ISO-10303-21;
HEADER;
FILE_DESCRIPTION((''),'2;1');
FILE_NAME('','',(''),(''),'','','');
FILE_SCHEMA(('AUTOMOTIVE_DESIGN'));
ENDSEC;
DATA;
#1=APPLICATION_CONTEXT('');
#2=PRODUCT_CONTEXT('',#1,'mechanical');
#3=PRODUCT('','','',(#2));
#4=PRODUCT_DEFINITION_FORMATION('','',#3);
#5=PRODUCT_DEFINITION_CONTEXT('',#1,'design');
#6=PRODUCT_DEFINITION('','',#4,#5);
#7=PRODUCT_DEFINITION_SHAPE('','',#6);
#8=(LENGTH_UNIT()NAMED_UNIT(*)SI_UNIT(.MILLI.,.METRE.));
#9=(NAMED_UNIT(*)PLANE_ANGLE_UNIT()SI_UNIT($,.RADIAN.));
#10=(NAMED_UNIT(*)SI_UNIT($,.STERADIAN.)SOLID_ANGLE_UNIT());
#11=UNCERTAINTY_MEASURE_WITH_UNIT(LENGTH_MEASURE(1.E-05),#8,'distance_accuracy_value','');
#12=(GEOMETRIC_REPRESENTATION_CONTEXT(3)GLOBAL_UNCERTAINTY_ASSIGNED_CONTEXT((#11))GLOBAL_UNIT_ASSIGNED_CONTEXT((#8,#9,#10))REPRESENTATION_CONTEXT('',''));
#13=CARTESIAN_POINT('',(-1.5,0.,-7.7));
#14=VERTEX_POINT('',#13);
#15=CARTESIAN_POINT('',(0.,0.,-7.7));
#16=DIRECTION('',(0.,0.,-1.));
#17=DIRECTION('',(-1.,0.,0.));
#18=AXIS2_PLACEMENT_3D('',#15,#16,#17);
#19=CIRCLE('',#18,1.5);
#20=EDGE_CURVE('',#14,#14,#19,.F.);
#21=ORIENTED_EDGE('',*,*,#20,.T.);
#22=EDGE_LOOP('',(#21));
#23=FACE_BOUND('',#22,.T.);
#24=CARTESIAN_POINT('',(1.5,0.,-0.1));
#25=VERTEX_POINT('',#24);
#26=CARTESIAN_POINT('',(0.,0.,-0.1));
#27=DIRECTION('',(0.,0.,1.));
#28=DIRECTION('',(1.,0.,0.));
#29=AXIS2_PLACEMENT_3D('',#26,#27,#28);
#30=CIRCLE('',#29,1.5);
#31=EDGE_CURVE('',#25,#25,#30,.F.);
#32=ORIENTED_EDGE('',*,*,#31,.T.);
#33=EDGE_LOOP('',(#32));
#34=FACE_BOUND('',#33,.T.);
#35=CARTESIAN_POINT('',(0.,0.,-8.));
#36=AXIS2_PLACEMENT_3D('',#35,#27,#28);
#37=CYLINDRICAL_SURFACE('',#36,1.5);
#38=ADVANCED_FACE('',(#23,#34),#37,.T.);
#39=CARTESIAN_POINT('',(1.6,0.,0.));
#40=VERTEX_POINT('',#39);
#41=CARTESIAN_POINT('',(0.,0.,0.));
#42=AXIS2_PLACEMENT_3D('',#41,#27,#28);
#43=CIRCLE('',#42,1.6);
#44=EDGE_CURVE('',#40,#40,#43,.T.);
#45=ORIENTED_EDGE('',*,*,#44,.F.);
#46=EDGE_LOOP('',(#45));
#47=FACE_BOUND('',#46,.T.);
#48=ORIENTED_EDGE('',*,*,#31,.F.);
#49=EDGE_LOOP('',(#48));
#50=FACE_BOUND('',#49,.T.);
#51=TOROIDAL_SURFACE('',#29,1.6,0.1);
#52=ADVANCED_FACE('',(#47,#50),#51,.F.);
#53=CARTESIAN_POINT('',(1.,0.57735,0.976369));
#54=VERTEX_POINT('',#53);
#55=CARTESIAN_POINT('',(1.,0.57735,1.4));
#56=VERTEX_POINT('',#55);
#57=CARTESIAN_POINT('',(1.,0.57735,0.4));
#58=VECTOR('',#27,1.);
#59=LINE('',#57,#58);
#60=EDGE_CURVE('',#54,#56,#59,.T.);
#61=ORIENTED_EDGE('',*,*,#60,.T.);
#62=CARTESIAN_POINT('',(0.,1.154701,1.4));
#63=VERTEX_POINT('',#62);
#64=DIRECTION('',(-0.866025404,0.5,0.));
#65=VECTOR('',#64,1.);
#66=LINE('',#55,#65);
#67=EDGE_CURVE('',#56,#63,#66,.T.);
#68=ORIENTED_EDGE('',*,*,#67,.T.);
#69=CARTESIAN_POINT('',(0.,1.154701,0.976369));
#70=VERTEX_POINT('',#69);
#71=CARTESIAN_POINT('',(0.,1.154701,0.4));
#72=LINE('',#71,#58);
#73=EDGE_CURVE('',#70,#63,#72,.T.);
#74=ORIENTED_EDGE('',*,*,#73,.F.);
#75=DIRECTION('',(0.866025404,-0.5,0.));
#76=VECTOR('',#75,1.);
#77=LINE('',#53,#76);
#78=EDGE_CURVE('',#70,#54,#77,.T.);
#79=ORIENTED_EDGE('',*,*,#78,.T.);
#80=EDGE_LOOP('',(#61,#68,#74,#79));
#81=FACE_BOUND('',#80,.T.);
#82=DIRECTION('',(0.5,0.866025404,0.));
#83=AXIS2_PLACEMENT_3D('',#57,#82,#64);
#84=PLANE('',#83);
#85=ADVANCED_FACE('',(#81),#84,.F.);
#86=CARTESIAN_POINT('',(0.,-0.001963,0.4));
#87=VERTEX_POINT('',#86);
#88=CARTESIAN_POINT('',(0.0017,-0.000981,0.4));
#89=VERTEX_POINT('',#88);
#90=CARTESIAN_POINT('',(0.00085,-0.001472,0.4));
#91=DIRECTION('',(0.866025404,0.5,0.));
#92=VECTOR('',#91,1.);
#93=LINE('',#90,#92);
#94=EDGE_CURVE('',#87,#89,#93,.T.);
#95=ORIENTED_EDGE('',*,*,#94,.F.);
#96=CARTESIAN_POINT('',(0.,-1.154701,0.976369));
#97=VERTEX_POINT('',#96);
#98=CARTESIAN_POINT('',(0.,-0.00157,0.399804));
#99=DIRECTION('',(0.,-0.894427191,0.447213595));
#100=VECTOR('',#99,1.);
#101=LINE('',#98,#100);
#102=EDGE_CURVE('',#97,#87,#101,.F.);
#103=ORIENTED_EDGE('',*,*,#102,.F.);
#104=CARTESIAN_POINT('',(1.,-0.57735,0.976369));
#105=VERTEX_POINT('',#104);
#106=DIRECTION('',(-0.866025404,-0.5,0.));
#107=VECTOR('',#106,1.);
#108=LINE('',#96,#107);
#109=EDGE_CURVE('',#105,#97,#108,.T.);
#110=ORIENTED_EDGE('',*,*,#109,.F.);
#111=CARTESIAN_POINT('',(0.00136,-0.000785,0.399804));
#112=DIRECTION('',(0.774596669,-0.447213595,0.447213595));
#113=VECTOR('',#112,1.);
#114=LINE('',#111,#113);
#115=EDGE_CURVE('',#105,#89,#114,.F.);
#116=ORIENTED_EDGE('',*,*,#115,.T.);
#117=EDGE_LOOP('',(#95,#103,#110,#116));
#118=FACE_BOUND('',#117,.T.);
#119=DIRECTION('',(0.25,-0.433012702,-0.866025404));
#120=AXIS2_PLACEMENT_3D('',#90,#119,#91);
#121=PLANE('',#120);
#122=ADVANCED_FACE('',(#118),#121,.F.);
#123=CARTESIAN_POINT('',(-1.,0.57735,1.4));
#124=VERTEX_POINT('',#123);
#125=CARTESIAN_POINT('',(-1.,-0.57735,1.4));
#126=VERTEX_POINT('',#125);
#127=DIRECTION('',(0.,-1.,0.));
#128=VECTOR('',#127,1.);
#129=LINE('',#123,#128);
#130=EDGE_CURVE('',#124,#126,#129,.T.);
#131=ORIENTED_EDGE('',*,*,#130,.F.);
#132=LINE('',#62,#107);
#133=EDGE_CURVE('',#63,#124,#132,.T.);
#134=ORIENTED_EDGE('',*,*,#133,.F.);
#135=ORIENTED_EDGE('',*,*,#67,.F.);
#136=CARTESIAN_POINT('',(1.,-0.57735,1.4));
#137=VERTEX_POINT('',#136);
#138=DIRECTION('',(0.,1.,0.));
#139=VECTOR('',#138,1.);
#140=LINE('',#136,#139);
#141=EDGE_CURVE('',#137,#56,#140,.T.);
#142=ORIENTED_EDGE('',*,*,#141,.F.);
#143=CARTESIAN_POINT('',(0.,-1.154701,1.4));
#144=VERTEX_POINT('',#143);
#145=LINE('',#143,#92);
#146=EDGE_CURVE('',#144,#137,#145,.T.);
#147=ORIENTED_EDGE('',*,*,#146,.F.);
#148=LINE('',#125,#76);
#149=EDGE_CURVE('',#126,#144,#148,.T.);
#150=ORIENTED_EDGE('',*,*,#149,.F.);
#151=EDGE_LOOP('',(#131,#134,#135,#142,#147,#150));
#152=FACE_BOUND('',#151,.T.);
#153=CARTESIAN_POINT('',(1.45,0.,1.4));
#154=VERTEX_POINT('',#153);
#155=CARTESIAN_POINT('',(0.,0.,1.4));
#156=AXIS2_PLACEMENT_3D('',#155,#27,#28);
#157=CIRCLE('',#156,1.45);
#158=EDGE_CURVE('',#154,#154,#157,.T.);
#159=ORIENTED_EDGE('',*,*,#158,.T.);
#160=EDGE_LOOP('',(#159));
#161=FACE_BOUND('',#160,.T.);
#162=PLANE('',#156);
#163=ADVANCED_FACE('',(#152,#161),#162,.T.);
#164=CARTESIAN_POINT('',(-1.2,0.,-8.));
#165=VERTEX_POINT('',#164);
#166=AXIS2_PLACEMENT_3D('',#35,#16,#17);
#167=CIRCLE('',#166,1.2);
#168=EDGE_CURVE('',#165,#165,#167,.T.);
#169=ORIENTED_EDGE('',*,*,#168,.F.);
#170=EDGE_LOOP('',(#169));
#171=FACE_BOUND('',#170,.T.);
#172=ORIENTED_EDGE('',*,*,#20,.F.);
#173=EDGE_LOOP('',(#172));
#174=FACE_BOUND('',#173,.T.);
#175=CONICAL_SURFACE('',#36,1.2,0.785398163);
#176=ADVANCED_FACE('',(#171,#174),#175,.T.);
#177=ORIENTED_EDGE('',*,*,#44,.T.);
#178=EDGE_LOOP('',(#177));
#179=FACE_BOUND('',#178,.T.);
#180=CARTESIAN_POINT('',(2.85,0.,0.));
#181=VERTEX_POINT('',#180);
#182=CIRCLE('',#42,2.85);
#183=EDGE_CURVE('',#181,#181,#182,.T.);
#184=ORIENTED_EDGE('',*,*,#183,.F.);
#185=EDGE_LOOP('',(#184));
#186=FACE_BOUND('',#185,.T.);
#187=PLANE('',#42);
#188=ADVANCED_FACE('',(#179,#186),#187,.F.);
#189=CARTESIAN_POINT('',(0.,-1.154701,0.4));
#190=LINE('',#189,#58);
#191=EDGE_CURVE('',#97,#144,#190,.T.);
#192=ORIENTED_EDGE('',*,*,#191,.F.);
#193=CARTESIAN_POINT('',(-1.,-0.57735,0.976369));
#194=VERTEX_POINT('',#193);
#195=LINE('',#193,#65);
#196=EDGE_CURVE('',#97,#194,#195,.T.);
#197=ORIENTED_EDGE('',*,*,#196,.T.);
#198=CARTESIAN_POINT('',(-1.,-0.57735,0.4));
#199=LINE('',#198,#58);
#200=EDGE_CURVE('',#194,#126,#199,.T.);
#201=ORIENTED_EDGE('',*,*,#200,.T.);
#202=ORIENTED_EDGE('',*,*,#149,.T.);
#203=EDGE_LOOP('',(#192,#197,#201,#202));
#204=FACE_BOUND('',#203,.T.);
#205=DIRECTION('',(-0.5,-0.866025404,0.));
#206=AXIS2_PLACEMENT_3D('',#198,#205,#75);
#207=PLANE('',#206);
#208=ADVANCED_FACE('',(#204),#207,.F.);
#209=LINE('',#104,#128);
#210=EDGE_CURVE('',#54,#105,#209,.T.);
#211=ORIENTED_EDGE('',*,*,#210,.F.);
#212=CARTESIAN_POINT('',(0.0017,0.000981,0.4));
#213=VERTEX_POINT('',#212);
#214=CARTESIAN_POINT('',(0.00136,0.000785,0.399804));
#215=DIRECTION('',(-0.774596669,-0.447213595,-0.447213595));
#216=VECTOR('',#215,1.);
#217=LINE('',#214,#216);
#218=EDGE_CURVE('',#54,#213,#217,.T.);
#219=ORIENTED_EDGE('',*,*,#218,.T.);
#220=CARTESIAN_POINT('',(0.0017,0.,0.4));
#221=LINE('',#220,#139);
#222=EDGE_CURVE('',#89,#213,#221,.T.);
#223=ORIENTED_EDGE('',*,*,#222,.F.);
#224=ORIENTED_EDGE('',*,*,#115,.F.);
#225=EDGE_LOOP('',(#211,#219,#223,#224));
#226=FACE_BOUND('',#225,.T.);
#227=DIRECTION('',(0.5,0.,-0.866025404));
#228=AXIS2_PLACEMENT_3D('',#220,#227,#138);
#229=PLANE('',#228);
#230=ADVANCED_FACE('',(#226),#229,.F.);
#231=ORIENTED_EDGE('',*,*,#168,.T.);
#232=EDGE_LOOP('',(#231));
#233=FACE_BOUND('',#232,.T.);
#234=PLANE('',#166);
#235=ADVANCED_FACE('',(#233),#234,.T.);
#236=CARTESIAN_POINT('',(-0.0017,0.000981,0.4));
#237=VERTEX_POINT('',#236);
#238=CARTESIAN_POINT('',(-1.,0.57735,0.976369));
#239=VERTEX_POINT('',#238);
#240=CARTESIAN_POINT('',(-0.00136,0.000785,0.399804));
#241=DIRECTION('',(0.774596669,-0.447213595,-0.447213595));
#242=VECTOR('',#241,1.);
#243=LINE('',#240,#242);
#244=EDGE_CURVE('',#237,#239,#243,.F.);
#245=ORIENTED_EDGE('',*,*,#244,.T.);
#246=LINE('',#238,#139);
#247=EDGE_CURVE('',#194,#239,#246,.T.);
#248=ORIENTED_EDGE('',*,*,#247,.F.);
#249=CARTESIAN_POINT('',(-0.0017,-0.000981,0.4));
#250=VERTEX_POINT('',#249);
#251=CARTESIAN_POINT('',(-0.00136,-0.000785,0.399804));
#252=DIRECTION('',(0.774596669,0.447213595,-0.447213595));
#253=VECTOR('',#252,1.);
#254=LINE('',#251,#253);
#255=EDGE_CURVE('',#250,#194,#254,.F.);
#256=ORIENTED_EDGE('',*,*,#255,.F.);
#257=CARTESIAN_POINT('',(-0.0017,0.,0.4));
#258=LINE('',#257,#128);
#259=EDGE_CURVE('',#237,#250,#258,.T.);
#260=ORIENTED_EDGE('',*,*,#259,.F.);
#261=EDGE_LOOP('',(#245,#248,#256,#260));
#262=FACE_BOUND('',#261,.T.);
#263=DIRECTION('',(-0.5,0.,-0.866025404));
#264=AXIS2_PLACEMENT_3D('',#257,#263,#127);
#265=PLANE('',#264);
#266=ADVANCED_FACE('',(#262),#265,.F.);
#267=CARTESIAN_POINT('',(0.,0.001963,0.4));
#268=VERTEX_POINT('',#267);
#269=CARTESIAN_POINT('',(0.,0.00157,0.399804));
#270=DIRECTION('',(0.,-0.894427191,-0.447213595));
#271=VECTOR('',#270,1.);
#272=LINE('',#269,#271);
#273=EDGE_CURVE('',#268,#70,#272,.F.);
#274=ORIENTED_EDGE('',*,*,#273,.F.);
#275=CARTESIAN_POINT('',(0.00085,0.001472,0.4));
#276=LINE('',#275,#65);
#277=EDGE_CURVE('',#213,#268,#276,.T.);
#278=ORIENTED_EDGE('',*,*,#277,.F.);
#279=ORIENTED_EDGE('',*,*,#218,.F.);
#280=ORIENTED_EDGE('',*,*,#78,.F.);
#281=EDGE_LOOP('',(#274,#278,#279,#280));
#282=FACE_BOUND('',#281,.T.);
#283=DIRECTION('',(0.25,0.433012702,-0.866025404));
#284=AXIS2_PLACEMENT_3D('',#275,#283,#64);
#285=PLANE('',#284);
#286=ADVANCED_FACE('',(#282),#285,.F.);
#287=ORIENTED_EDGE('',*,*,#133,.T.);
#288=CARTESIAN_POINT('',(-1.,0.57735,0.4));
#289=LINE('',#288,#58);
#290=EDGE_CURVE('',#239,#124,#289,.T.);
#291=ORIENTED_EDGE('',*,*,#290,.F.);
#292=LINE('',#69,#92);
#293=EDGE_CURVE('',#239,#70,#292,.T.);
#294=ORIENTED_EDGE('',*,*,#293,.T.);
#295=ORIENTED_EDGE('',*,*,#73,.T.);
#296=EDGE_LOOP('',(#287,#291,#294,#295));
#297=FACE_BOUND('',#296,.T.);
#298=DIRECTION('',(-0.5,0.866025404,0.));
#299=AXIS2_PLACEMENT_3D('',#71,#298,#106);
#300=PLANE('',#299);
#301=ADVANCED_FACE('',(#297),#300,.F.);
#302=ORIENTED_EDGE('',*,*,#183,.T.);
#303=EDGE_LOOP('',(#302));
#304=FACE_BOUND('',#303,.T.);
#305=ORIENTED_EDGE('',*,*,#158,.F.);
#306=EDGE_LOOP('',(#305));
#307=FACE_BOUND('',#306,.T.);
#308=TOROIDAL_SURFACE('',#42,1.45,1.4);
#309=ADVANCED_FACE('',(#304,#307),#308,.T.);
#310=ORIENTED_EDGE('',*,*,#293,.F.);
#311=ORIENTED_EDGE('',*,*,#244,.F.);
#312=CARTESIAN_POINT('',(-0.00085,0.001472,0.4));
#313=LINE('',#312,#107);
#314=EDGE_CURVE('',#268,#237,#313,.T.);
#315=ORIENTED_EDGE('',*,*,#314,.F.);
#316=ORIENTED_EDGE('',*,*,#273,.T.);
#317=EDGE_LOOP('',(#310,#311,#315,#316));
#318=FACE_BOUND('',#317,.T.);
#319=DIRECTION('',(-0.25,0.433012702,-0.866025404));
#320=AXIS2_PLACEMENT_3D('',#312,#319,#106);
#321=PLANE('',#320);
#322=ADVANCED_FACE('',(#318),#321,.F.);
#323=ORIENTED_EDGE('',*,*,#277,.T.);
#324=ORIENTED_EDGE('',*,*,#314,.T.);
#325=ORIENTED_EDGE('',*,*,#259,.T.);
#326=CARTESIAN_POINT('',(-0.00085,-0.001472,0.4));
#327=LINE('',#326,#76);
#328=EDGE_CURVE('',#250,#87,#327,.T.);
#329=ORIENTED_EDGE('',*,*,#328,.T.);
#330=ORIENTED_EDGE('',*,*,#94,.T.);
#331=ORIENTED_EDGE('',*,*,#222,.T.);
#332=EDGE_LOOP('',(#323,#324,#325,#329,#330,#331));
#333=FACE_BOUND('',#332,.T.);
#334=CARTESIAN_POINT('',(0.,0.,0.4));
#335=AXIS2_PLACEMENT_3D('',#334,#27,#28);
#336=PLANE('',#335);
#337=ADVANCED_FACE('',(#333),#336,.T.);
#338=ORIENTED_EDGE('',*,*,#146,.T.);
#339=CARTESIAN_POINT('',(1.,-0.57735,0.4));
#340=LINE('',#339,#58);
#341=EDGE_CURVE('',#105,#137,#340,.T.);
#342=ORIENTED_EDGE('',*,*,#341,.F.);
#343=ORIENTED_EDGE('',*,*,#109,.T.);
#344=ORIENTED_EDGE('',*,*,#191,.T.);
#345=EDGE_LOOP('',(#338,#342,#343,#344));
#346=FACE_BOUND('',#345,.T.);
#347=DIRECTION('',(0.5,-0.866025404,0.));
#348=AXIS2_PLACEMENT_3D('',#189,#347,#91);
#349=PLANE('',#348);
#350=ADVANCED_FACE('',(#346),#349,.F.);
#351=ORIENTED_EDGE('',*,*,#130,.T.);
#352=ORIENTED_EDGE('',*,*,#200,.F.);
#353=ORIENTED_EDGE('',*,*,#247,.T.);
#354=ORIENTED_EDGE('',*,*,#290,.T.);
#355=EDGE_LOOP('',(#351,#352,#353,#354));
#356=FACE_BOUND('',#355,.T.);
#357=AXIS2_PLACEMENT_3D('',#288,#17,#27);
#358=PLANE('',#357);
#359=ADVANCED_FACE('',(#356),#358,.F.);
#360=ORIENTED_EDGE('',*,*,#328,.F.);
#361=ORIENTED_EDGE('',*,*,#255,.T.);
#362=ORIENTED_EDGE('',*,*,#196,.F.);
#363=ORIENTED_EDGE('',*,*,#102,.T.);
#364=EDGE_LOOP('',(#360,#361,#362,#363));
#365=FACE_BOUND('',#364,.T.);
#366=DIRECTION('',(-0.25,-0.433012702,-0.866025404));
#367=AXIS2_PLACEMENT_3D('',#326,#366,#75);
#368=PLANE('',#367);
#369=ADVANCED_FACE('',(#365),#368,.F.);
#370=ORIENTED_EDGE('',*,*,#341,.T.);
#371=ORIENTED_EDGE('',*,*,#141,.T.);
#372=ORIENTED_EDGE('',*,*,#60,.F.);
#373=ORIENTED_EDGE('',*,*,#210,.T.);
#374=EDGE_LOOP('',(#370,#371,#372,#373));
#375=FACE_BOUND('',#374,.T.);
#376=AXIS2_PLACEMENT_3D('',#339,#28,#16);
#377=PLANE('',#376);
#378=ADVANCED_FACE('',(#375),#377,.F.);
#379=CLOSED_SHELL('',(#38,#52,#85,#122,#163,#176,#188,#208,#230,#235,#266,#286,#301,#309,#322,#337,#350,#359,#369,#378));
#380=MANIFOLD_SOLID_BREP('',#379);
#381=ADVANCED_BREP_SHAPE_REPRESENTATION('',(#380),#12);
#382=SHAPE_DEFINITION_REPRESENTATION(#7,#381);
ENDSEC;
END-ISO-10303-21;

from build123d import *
from OCP.BRepFilletAPI import BRepFilletAPI_MakeChamfer

# Parameters (mm, degrees)
SKETCH_1_R          = 2.85
EXTRUDE_1_DEPTH     = 1.4
FILLET_1_R          = 1.4
SKETCH_3_R          = 1.5
EXTRUDE_3_DEPTH     = 8
CUT_EXTRUDE_1_DEPTH = 1
CHAMFER_2_SIZE      = 0.3
CHAMFER_3_SIZE      = 0.576368876
CHAMFER_3_SIZE2     = 0.998300177
FILLET_2_R          = 0.1


with BuildPart() as part:
    # 草图1 → 凸台-拉伸1 (new body)
    with BuildSketch(Plane.XY):
        Circle(SKETCH_1_R)
    extrude(amount=EXTRUDE_1_DEPTH)

    # 圆角1
    fillet_1_edges = [part.edges().sort_by_distance(p)[0] for p in [
        (-2.85, 0, 1.4),
    ]]
    fillet(fillet_1_edges, radius=FILLET_1_R - 0.0001)  # a hair under: the kernel refuses the full size

    # 草图3 → 凸台-拉伸3 (add)
    with BuildSketch(Plane(origin=(0, 0, 0), x_dir=(-1, 0, 0), z_dir=(0, 0, -1))):
        with Locations(Location((0, 0, 0), (0, 0, 180))):
            Circle(SKETCH_3_R)
    extrude(amount=EXTRUDE_3_DEPTH)

    # 草图4 → 切除-拉伸1 (cut)
    with BuildSketch(Plane.XY.offset(1.4)):
        Polygon((1, 0.577350269), (0, 1.154700538), (-1, 0.577350269), (-1, -0.577350269), (0, -1.154700538), (1, -0.577350269), align=None)
    extrude(amount=-CUT_EXTRUDE_1_DEPTH, mode=Mode.SUBTRACT)

    # 倒角2
    chamfer_2_edges = [part.edges().sort_by_distance(p)[0] for p in [
        (-1.5, 0, -8),
    ]]
    chamfer(chamfer_2_edges, length=CHAMFER_2_SIZE)

    # 倒角3: one chamfer whose edges measure the first distance from different faces: ONE call of the kernel's chamfer builder (chamfer() names one face for all edges)
    chamfer_3_edges_1 = [part.edges().sort_by_distance(p)[0] for p in [
        (1, 0, 0.4),
    ]]
    chamfer_3_side_1 = [part.faces().sort_by_distance(p)[0] for p in [
        (1, 0, 0.9),
    ]]
    chamfer_3_edges_2 = [part.edges().sort_by_distance(p)[0] for p in [
        (0.5, -0.866025404, 0.4),
    ]]
    chamfer_3_side_2 = [part.faces().sort_by_distance(p)[0] for p in [
        (0.5, -0.866025404, 0.9),
    ]]
    chamfer_3_edges_3 = [part.edges().sort_by_distance(p)[0] for p in [
        (-0.5, -0.866025404, 0.4),
    ]]
    chamfer_3_side_3 = [part.faces().sort_by_distance(p)[0] for p in [
        (-0.5, -0.866025404, 0.9),
    ]]
    chamfer_3_edges_4 = [part.edges().sort_by_distance(p)[0] for p in [
        (-1, 0, 0.4),
    ]]
    chamfer_3_side_4 = [part.faces().sort_by_distance(p)[0] for p in [
        (-1, 0, 0.9),
    ]]
    chamfer_3_edges_5 = [part.edges().sort_by_distance(p)[0] for p in [
        (-0.5, 0.866025404, 0.4),
    ]]
    chamfer_3_side_5 = [part.faces().sort_by_distance(p)[0] for p in [
        (-0.5, 0.866025404, 0.9),
    ]]
    chamfer_3_edges_6 = [part.edges().sort_by_distance(p)[0] for p in [
        (0.5, 0.866025404, 0.4),
    ]]
    chamfer_3_side_6 = [part.faces().sort_by_distance(p)[0] for p in [
        (0.5, 0.866025404, 0.9),
    ]]
    chamfer_3 = BRepFilletAPI_MakeChamfer(part.part.solid().wrapped)
    for e in chamfer_3_edges_1:
        chamfer_3.Add(CHAMFER_3_SIZE, CHAMFER_3_SIZE2, e.wrapped, chamfer_3_side_1[0].wrapped)  # the first distance lies on this face
    for e in chamfer_3_edges_2:
        chamfer_3.Add(CHAMFER_3_SIZE, CHAMFER_3_SIZE2, e.wrapped, chamfer_3_side_2[0].wrapped)  # the first distance lies on this face
    for e in chamfer_3_edges_3:
        chamfer_3.Add(CHAMFER_3_SIZE, CHAMFER_3_SIZE2, e.wrapped, chamfer_3_side_3[0].wrapped)  # the first distance lies on this face
    for e in chamfer_3_edges_4:
        chamfer_3.Add(CHAMFER_3_SIZE, CHAMFER_3_SIZE2, e.wrapped, chamfer_3_side_4[0].wrapped)  # the first distance lies on this face
    for e in chamfer_3_edges_5:
        chamfer_3.Add(CHAMFER_3_SIZE, CHAMFER_3_SIZE2, e.wrapped, chamfer_3_side_5[0].wrapped)  # the first distance lies on this face
    for e in chamfer_3_edges_6:
        chamfer_3.Add(CHAMFER_3_SIZE, CHAMFER_3_SIZE2, e.wrapped, chamfer_3_side_6[0].wrapped)  # the first distance lies on this face
    add(Compound.cast(chamfer_3.Shape()), mode=Mode.REPLACE)

    # 圆角2
    fillet_2_edges = [part.edges().sort_by_distance(p)[0] for p in [
        (-1.5, 0, 0),
    ]]
    fillet(fillet_2_edges, radius=FILLET_2_R)


solid = part.part
